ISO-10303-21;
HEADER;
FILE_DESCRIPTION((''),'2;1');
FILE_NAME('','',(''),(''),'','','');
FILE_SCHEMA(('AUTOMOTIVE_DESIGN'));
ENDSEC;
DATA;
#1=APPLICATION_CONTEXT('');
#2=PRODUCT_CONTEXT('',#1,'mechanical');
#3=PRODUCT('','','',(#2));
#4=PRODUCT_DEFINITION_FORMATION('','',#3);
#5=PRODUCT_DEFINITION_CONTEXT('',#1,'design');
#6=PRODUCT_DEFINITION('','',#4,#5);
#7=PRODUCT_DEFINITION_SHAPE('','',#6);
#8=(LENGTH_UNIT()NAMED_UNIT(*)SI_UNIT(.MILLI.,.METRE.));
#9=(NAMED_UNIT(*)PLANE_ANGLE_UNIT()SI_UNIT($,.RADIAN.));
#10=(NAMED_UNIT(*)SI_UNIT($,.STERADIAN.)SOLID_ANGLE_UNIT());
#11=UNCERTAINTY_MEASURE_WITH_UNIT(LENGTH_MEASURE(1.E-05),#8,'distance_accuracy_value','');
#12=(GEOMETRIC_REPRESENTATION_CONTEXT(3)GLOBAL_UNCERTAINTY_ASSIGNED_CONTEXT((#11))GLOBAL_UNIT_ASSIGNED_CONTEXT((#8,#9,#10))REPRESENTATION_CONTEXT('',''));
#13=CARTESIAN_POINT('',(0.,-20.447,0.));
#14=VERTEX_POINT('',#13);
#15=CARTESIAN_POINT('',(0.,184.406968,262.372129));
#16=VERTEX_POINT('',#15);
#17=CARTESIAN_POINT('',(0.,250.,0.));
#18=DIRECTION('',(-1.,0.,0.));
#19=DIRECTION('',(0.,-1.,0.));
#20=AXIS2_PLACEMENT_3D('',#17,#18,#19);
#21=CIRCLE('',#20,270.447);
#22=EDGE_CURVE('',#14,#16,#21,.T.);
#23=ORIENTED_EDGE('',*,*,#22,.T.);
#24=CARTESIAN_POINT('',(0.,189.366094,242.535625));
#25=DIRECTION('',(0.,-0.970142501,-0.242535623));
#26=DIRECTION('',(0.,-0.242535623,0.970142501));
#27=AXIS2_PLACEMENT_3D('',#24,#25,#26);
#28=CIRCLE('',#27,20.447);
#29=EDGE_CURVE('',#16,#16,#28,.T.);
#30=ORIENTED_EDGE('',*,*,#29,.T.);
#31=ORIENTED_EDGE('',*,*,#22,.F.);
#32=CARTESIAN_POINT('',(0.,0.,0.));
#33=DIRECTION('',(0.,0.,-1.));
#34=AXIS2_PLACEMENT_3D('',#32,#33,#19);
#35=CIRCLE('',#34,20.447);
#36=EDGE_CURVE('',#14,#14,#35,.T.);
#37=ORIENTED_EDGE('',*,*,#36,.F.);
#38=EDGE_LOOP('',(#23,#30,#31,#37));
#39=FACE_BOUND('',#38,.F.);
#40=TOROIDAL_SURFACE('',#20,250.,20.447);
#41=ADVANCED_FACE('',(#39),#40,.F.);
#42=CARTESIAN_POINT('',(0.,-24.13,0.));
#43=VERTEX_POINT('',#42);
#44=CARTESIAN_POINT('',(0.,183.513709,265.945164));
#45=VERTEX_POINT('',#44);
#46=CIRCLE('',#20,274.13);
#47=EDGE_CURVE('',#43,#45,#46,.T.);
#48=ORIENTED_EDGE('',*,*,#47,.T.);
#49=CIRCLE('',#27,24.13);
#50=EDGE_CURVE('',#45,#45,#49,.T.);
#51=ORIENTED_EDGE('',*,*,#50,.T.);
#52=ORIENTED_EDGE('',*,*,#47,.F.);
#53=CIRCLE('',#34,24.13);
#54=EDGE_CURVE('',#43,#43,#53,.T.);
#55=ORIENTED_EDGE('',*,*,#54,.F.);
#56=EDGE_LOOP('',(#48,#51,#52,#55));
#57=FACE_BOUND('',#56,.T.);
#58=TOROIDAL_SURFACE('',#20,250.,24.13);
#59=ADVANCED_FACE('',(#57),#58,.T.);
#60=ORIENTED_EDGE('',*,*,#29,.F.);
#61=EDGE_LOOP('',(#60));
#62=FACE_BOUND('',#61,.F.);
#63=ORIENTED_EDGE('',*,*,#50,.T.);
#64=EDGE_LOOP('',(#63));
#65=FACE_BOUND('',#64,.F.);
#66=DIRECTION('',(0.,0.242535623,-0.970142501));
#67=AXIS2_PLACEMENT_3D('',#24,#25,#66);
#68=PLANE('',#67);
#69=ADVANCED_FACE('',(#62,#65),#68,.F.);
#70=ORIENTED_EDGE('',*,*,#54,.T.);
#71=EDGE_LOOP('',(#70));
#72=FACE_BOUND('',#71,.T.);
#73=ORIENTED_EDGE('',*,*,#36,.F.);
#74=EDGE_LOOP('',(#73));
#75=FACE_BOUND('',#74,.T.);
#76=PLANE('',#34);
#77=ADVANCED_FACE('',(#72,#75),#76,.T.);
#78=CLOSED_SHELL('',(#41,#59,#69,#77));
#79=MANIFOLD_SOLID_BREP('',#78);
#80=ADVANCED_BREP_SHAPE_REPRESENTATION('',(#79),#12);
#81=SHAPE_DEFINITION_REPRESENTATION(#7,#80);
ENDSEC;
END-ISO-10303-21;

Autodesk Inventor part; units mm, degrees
ref_plane "Start Plane" through (0, 0, 0) normal (0, 0, 1) x (1, 0, 0)
ref_plane "End Plane" through (0, 0, 331.454416) normal (0, 0, 1) x (1, 0, 0)
sketch "Sketch" plane through (0, 0, 0) normal (0, 0, -1) x (0, -1, 0)
  circle A0 centre (0, 0) radius 20.447
  circle A1 centre (0, 0) radius 24.13
  dimension "d0" = 48.26
  dimension "d1" = 3.683
sketch "Sketch3" plane through (0, 0, 0) normal (0, 0, 1) x (1, 0, 0)
  line L0 (0, 0) -> (10, 0)
ref_plane "Work Plane3" through (0, 0, 0) normal (0, -1, 0) x (1, 0, 0)
ref_plane "Orientation Work Plane" through (0, 0, 0) normal (0, 0, -1) x (0, -1, 0)
sketch3d "Sweep Path"
  arc A0 (0, 0, 0) -> (0, 189.366094, 242.535625) centre (0, 250, 0) ccw
sweep "Body" add profiles "Sketch" path "Sweep Path"
sketch "Sketch4" plane through (0, 0, 0) normal (0, -1, 0) x (1, 0, 0)
  line L0 (-2, 0) -> (12, 0)
  line L1 (-33.782, 331.454416) -> (33.782, 331.454416)
  dimension "d7" = 331.45442
equation "\"d0\" = G_H"
equation "\"d1\" = G_T"
equation "\"G_H\" = 48.26"
equation "\"G_T\" = 3.683"
equation "\"G_L\" = d7"
equation "\"G_OFFSET_START\" = 0"
equation "\"G_OFFSET_END\" = 0"
equation "\"d5\" = G_OFFSET_END + B_L"
equation "\"B_L\" = 331.45442"
properties part number "ANSI - 1 1/2 x 0.145 - 13.049" material "Steel, Mild"
